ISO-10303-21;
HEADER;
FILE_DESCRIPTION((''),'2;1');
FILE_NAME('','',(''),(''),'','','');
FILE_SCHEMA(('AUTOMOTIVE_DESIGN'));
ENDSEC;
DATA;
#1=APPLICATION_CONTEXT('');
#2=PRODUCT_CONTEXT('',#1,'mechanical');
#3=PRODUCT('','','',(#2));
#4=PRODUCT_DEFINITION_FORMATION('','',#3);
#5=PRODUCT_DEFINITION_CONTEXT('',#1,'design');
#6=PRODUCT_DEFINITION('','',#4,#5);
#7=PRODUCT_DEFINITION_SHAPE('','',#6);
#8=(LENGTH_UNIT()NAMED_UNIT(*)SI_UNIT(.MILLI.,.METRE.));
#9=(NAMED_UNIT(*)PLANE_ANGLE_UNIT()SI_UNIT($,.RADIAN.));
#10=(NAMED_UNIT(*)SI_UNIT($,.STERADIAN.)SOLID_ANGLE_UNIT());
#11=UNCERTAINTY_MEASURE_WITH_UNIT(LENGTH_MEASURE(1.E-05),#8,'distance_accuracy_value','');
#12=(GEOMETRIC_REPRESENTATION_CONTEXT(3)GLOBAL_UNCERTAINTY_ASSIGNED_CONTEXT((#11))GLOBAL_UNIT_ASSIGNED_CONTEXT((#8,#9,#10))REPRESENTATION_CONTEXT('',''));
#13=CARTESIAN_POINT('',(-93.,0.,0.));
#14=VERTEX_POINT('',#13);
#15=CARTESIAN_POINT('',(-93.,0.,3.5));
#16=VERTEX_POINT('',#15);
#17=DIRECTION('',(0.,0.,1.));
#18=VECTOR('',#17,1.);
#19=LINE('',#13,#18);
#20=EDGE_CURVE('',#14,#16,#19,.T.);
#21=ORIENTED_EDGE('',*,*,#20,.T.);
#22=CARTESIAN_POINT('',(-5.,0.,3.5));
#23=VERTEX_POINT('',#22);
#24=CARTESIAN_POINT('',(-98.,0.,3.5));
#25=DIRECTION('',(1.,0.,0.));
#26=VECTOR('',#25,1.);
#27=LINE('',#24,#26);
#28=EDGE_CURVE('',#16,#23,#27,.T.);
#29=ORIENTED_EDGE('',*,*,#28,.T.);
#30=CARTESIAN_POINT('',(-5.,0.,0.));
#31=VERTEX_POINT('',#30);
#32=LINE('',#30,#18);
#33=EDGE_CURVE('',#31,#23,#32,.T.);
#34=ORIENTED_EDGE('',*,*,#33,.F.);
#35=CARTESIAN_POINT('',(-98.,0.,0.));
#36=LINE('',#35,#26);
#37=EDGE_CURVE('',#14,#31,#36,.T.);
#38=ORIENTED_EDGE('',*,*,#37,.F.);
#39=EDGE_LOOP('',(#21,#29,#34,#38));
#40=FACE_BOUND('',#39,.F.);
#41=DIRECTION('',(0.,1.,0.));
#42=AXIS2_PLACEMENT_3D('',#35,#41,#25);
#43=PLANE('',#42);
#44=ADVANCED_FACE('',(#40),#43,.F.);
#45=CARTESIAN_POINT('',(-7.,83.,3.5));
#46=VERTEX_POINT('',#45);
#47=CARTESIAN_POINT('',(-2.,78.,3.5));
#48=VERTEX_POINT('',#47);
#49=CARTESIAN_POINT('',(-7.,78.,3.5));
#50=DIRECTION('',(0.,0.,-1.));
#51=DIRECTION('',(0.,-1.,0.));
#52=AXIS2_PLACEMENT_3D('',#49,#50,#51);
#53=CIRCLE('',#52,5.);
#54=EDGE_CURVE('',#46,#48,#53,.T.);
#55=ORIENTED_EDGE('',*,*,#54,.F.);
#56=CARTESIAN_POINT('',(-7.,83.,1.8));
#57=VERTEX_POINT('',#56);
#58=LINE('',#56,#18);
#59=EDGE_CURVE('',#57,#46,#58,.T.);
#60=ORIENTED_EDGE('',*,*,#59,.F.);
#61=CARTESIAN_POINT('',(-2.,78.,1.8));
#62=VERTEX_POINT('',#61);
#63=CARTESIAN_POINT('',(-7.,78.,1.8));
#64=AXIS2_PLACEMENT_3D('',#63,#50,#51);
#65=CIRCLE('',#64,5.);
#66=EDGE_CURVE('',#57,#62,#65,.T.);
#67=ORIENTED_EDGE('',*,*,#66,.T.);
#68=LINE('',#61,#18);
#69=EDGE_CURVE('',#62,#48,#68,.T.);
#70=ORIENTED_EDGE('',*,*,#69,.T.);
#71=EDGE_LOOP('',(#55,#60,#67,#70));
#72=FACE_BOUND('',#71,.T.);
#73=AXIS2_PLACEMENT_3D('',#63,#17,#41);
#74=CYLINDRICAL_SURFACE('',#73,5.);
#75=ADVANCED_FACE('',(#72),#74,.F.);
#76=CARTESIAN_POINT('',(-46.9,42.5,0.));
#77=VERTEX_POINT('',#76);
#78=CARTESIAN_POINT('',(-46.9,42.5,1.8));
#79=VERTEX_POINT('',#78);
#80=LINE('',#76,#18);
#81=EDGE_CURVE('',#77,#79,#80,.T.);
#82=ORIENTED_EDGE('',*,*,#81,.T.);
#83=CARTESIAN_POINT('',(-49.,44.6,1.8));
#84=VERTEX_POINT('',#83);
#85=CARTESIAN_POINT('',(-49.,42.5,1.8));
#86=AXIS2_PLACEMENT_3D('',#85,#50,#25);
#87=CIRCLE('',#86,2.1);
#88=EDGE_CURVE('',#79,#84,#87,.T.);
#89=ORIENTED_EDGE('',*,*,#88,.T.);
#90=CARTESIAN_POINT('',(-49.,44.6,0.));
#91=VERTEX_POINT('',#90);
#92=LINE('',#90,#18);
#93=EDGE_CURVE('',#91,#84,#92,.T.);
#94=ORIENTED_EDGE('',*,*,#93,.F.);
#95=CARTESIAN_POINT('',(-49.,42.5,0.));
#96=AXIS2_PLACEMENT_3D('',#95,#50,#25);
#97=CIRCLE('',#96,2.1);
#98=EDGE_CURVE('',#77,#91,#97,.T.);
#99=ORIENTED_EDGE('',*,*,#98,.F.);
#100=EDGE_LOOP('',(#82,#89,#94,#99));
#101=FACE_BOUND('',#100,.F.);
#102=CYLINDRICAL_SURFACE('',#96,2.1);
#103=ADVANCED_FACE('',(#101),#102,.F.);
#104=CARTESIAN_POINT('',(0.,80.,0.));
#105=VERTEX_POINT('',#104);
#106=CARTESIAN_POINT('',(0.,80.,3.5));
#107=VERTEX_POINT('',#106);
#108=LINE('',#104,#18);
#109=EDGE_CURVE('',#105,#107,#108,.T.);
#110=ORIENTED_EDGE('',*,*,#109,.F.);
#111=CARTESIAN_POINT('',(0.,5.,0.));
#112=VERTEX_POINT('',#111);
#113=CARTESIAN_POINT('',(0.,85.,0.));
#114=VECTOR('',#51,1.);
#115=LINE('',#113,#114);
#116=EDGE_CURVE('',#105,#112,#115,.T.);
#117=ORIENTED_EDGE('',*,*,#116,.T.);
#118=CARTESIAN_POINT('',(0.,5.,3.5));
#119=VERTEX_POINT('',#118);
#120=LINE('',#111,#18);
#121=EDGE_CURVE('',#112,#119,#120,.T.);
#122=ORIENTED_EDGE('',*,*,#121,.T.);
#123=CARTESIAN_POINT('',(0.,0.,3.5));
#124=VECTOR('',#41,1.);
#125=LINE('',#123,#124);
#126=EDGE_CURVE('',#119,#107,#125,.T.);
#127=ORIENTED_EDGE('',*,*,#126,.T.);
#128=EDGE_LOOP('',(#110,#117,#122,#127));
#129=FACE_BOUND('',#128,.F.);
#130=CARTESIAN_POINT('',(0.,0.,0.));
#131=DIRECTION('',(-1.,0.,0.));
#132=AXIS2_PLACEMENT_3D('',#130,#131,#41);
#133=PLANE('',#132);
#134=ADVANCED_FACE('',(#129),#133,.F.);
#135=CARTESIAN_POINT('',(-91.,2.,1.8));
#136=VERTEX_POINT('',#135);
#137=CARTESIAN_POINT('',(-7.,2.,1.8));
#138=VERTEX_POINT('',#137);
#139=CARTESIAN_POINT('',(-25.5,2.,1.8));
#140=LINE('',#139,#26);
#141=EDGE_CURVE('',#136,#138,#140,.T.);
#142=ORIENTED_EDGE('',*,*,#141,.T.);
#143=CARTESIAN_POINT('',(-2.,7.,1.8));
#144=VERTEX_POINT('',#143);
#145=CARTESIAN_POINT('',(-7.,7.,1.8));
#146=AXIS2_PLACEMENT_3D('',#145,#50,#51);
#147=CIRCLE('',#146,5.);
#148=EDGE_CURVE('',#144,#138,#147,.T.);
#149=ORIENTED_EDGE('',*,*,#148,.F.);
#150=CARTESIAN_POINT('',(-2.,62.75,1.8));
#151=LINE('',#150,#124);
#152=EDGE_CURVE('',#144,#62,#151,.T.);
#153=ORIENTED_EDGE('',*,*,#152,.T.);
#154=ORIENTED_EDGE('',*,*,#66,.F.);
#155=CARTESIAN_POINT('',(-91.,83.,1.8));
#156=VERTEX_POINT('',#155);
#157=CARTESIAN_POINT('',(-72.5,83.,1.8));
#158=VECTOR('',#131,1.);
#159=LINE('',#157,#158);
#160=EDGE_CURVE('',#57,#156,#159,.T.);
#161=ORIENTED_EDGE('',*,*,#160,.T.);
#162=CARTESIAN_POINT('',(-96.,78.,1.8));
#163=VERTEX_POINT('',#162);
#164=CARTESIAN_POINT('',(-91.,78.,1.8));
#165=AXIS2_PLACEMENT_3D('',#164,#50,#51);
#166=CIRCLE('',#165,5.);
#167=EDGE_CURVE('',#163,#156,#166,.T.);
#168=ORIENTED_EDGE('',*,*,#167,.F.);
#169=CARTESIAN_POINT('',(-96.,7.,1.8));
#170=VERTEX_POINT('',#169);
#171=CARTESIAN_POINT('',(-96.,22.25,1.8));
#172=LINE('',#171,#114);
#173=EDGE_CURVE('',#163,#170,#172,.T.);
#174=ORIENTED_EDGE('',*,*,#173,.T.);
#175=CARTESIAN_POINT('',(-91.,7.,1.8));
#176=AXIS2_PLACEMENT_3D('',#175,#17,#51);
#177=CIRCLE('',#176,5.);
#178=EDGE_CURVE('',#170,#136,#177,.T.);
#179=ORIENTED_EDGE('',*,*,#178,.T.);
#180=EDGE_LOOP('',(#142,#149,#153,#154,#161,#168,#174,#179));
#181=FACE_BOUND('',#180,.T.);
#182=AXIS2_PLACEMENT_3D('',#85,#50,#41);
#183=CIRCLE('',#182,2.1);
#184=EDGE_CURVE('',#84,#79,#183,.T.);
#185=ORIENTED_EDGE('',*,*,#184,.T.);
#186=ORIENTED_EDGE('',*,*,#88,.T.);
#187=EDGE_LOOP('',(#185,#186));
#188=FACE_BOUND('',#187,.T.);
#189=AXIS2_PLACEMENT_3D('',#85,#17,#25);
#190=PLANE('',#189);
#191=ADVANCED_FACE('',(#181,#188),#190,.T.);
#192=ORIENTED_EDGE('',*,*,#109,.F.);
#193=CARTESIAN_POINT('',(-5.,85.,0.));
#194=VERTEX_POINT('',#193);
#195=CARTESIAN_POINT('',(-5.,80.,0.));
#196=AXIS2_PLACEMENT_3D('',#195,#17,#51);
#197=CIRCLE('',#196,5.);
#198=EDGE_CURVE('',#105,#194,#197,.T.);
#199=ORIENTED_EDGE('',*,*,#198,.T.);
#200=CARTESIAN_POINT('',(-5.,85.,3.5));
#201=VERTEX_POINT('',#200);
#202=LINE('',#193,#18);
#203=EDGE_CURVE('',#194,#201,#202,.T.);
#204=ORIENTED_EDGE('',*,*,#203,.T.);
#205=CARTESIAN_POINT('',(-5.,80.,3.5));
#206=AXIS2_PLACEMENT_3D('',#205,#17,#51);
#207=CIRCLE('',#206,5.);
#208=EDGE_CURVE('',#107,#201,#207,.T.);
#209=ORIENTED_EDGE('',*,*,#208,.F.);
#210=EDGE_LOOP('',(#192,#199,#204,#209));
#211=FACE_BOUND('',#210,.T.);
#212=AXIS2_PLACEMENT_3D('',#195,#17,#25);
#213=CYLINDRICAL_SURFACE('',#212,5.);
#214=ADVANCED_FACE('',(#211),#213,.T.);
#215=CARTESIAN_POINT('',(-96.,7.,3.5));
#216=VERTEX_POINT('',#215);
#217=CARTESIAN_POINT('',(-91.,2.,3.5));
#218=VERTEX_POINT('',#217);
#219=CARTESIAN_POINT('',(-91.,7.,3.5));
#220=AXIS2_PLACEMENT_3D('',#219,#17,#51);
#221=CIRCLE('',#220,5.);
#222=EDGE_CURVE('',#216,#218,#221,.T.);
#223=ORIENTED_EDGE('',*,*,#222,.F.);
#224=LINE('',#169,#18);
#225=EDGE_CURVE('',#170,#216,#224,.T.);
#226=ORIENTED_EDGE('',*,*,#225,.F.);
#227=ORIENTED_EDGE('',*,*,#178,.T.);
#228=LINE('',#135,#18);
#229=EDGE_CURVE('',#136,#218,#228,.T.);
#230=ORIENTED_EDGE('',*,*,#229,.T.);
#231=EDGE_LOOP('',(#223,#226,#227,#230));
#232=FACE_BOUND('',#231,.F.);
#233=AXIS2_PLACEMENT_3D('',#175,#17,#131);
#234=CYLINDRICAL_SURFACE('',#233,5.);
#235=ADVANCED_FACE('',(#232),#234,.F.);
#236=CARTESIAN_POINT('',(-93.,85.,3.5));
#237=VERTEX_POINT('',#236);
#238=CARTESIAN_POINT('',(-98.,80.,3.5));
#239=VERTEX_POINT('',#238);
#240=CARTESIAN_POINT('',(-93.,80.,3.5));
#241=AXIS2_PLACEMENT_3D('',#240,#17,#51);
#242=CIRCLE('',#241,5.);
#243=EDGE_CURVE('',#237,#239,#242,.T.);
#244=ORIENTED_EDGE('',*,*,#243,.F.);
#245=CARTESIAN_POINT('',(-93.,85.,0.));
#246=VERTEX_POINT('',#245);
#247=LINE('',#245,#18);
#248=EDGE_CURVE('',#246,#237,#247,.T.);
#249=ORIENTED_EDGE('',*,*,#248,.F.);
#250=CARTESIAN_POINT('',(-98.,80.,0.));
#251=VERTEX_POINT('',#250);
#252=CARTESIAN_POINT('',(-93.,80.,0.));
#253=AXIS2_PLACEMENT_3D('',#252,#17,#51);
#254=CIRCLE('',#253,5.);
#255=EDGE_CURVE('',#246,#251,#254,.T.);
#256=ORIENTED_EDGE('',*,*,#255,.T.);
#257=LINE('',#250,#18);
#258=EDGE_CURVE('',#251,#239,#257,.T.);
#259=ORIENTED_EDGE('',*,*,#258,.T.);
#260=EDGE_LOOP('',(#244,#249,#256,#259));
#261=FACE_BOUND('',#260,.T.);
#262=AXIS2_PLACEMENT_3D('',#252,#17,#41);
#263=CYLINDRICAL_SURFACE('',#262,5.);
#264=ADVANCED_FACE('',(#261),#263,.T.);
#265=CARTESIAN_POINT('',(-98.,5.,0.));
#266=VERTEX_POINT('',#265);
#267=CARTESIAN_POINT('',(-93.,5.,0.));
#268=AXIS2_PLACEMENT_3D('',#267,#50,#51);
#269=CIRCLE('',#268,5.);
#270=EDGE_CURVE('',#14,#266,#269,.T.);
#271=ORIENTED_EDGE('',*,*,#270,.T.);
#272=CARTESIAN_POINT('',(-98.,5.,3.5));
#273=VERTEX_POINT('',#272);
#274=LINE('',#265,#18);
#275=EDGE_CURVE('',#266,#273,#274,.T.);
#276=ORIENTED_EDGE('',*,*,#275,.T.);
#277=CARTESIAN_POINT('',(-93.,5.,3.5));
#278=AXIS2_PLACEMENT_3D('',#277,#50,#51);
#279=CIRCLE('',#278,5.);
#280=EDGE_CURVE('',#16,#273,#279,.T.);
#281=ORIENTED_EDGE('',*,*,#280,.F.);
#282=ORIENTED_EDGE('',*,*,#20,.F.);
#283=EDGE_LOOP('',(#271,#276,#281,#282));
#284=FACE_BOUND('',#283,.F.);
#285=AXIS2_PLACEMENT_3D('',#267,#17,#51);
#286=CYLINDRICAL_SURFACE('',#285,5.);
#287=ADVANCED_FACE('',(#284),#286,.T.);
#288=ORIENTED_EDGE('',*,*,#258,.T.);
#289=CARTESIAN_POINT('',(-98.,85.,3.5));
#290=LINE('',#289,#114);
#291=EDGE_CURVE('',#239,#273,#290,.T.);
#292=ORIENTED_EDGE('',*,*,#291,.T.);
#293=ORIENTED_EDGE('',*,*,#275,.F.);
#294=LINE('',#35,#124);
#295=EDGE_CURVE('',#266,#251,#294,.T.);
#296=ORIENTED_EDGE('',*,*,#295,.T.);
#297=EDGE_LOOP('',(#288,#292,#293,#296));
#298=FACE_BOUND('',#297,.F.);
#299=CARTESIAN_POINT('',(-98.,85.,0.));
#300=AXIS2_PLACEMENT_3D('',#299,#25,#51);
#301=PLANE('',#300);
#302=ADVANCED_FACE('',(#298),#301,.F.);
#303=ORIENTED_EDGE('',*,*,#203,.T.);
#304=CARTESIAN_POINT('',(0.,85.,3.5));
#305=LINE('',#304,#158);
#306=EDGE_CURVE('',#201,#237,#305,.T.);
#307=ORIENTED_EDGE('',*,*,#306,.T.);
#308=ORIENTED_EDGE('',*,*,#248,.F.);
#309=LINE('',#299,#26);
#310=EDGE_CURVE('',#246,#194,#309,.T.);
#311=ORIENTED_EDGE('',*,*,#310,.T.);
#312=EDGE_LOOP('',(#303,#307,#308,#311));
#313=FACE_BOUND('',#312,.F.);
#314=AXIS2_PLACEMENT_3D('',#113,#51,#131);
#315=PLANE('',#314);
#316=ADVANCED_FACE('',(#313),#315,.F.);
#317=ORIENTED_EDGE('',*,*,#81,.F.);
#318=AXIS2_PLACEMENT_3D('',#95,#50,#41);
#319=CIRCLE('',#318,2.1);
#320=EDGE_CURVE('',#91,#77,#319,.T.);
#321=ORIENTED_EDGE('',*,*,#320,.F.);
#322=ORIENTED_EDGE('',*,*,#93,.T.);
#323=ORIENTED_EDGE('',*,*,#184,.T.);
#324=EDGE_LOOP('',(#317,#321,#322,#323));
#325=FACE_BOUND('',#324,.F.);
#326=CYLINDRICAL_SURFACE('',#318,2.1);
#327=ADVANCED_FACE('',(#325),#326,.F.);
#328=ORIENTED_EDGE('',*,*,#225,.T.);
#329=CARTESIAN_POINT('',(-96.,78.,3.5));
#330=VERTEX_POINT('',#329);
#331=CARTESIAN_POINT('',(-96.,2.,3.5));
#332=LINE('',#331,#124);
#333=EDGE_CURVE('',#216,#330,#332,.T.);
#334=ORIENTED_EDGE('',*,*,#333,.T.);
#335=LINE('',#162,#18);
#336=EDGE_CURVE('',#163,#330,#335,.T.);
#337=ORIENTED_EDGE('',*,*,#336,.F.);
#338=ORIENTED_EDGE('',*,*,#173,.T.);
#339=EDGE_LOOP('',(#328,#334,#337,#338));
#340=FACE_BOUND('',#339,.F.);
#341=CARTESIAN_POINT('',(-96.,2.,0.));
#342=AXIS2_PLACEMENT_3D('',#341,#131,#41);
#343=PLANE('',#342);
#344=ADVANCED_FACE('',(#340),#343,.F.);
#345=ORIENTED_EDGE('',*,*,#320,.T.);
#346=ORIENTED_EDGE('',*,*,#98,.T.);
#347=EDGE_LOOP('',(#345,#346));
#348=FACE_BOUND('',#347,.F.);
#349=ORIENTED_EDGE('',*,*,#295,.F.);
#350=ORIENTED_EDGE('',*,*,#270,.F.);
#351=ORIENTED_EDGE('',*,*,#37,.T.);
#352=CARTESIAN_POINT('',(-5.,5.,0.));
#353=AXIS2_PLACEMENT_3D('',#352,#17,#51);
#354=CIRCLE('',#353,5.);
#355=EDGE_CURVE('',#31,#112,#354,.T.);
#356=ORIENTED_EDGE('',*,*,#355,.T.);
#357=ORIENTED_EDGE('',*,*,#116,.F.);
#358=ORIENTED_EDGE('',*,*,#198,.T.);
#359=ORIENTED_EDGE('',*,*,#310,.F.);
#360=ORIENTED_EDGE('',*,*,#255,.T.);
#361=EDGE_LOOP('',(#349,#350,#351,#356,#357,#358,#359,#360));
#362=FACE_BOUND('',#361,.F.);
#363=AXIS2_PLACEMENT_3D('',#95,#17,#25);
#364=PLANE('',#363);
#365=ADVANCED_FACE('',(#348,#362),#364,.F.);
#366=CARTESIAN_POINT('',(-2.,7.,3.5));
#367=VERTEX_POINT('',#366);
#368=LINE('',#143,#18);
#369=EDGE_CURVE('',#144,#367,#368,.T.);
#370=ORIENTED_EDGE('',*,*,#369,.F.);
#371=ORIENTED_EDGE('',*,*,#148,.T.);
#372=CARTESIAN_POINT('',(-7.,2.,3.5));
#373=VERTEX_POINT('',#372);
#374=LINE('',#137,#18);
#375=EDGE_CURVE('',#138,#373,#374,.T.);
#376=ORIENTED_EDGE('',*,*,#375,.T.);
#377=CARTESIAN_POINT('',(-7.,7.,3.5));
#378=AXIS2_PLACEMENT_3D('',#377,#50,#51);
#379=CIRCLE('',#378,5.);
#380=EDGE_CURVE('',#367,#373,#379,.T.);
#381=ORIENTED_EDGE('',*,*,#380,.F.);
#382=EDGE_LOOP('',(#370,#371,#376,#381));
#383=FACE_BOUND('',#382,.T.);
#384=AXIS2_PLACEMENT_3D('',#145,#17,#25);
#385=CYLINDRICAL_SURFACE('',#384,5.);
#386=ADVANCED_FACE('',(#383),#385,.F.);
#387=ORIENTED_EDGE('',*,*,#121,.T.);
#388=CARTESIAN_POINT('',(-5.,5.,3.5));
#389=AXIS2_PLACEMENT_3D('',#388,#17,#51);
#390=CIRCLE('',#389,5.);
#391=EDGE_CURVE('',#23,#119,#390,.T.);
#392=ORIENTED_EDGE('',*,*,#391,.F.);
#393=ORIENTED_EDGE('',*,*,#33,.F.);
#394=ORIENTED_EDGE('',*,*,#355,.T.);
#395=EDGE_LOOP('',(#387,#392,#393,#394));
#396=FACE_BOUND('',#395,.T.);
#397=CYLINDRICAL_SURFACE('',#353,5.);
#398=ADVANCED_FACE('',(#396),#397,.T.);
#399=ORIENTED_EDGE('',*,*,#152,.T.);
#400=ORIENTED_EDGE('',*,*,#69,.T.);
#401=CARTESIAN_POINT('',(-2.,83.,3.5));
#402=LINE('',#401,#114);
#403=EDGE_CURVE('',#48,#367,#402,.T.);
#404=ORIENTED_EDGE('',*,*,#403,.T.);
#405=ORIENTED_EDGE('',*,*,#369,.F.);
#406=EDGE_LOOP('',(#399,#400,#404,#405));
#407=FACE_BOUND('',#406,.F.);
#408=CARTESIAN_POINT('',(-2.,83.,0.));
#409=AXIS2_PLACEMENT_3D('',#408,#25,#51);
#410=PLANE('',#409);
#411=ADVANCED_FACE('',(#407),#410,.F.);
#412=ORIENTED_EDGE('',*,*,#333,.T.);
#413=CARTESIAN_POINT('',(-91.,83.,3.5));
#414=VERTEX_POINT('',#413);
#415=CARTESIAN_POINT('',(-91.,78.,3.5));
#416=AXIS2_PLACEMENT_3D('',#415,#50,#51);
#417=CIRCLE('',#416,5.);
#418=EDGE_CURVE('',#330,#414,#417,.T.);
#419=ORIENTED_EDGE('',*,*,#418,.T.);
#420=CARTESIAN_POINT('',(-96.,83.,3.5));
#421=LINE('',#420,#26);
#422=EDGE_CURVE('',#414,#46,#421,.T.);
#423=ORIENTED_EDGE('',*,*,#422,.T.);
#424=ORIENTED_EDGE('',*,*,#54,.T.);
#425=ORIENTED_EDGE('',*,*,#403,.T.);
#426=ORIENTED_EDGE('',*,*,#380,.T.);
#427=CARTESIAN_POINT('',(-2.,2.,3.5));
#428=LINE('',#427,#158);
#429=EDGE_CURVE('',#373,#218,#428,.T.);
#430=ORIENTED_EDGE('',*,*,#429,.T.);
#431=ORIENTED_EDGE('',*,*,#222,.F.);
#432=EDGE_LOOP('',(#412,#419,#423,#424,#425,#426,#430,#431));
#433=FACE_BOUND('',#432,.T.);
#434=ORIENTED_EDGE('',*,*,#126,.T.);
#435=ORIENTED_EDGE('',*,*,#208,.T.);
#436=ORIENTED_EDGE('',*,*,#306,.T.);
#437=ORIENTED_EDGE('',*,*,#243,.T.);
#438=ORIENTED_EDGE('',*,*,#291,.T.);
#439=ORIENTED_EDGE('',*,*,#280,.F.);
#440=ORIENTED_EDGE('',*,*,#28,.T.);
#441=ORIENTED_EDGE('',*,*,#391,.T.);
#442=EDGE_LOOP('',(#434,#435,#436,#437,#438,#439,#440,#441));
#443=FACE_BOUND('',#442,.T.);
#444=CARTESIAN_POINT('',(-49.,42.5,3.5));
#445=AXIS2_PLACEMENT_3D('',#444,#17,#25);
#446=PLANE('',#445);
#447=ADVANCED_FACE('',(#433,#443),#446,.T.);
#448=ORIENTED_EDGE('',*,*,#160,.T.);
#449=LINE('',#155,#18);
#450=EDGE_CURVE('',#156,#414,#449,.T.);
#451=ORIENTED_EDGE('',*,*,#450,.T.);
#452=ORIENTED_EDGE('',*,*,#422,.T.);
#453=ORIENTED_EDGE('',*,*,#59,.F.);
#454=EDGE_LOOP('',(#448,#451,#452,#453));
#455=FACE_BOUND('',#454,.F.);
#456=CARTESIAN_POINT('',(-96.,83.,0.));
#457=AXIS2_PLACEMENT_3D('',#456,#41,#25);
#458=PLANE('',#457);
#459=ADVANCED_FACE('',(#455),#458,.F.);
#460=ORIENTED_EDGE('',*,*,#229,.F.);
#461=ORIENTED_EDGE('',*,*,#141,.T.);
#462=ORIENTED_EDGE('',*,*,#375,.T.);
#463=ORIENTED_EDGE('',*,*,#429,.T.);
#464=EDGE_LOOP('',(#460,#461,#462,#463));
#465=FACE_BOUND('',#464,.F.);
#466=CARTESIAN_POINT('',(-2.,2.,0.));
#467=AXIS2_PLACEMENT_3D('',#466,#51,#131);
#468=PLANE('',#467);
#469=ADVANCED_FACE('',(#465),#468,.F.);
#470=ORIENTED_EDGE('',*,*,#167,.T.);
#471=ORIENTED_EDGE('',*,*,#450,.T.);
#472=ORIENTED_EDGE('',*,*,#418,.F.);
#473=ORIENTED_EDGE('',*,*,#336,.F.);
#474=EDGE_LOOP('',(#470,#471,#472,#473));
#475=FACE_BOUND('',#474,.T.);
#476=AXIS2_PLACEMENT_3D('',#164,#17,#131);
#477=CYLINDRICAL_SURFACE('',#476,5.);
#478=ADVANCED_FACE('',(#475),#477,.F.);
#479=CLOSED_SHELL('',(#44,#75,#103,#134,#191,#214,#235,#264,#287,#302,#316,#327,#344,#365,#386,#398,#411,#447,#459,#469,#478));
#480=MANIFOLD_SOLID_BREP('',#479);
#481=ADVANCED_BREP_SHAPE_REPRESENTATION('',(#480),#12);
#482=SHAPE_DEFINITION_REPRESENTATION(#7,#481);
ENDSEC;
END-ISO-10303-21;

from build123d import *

# Parameters (mm, degrees)
F1_DEPTH = 1.8
F2_R     = 5
F3_DEPTH = 3.5
F4_R     = 5
F5_R     = 5


# Not quite as in the source:
# - a feature names something its author has since deleted; it is built from what else it names


with BuildPart() as f1:
    # F0 (on Top) → F1 (new body)
    with BuildSketch(Plane.XY):
        Polygon((-98, 0), (0, 0), (0, 85), (-49, 85), (-98, 85), align=None)
        Polygon((-96, 83), (-49, 83), (-2, 83), (-2, 2), (-96, 2), align=None, mode=Mode.SUBTRACT)
        Polygon((-2, 83), (-49, 83), (-96, 83), (-96, 2), (-2, 2), align=None)
        with BuildLine():
            ThreePointArc((-46.9, 42.5), (-50.4849242405, 41.0150757595), (-49, 44.6))
            ThreePointArc((-49, 44.6), (-47.5150757595, 43.9849242405), (-46.9, 42.5))
        make_face(mode=Mode.SUBTRACT)
    extrude(amount=F1_DEPTH)

    # F2
    f2_edges = [f1.edges().sort_by_distance(p)[0] for p in [
        (-98, 85, 0.9),
        (-98, 0, 0.9),
        (0, 0, 0.9),
        (0, 85, 0.9),
    ]]
    fillet(f2_edges, radius=F2_R)

    # F0 (on Top) → F3 (join)
    with BuildSketch(Plane.XY):
        Polygon((-98, 0), (0, 0), (0, 85), (-49, 85), (-98, 85), align=None)
        Polygon((-96, 83), (-49, 83), (-2, 83), (-2, 2), (-96, 2), align=None, mode=Mode.SUBTRACT)
    extrude(amount=F3_DEPTH)

    # F4
    f4_edges = [f1.edges().sort_by_distance(p)[0] for p in [
        (0, 85, 1.75),
        (0, 0, 1.75),
        (-98, 0, 1.75),
        (-98, 85, 1.75),
    ]]
    fillet(f4_edges, radius=F4_R)

    # F5
    f5_edges = [f1.edges().sort_by_distance(p)[0] for p in [
        (-96, 83, 2.65),
        (-96, 2, 2.65),
        (-2, 83, 2.65),
        (-2, 2, 2.65),
    ]]
    fillet(f5_edges, radius=F5_R)


solid = f1.part
